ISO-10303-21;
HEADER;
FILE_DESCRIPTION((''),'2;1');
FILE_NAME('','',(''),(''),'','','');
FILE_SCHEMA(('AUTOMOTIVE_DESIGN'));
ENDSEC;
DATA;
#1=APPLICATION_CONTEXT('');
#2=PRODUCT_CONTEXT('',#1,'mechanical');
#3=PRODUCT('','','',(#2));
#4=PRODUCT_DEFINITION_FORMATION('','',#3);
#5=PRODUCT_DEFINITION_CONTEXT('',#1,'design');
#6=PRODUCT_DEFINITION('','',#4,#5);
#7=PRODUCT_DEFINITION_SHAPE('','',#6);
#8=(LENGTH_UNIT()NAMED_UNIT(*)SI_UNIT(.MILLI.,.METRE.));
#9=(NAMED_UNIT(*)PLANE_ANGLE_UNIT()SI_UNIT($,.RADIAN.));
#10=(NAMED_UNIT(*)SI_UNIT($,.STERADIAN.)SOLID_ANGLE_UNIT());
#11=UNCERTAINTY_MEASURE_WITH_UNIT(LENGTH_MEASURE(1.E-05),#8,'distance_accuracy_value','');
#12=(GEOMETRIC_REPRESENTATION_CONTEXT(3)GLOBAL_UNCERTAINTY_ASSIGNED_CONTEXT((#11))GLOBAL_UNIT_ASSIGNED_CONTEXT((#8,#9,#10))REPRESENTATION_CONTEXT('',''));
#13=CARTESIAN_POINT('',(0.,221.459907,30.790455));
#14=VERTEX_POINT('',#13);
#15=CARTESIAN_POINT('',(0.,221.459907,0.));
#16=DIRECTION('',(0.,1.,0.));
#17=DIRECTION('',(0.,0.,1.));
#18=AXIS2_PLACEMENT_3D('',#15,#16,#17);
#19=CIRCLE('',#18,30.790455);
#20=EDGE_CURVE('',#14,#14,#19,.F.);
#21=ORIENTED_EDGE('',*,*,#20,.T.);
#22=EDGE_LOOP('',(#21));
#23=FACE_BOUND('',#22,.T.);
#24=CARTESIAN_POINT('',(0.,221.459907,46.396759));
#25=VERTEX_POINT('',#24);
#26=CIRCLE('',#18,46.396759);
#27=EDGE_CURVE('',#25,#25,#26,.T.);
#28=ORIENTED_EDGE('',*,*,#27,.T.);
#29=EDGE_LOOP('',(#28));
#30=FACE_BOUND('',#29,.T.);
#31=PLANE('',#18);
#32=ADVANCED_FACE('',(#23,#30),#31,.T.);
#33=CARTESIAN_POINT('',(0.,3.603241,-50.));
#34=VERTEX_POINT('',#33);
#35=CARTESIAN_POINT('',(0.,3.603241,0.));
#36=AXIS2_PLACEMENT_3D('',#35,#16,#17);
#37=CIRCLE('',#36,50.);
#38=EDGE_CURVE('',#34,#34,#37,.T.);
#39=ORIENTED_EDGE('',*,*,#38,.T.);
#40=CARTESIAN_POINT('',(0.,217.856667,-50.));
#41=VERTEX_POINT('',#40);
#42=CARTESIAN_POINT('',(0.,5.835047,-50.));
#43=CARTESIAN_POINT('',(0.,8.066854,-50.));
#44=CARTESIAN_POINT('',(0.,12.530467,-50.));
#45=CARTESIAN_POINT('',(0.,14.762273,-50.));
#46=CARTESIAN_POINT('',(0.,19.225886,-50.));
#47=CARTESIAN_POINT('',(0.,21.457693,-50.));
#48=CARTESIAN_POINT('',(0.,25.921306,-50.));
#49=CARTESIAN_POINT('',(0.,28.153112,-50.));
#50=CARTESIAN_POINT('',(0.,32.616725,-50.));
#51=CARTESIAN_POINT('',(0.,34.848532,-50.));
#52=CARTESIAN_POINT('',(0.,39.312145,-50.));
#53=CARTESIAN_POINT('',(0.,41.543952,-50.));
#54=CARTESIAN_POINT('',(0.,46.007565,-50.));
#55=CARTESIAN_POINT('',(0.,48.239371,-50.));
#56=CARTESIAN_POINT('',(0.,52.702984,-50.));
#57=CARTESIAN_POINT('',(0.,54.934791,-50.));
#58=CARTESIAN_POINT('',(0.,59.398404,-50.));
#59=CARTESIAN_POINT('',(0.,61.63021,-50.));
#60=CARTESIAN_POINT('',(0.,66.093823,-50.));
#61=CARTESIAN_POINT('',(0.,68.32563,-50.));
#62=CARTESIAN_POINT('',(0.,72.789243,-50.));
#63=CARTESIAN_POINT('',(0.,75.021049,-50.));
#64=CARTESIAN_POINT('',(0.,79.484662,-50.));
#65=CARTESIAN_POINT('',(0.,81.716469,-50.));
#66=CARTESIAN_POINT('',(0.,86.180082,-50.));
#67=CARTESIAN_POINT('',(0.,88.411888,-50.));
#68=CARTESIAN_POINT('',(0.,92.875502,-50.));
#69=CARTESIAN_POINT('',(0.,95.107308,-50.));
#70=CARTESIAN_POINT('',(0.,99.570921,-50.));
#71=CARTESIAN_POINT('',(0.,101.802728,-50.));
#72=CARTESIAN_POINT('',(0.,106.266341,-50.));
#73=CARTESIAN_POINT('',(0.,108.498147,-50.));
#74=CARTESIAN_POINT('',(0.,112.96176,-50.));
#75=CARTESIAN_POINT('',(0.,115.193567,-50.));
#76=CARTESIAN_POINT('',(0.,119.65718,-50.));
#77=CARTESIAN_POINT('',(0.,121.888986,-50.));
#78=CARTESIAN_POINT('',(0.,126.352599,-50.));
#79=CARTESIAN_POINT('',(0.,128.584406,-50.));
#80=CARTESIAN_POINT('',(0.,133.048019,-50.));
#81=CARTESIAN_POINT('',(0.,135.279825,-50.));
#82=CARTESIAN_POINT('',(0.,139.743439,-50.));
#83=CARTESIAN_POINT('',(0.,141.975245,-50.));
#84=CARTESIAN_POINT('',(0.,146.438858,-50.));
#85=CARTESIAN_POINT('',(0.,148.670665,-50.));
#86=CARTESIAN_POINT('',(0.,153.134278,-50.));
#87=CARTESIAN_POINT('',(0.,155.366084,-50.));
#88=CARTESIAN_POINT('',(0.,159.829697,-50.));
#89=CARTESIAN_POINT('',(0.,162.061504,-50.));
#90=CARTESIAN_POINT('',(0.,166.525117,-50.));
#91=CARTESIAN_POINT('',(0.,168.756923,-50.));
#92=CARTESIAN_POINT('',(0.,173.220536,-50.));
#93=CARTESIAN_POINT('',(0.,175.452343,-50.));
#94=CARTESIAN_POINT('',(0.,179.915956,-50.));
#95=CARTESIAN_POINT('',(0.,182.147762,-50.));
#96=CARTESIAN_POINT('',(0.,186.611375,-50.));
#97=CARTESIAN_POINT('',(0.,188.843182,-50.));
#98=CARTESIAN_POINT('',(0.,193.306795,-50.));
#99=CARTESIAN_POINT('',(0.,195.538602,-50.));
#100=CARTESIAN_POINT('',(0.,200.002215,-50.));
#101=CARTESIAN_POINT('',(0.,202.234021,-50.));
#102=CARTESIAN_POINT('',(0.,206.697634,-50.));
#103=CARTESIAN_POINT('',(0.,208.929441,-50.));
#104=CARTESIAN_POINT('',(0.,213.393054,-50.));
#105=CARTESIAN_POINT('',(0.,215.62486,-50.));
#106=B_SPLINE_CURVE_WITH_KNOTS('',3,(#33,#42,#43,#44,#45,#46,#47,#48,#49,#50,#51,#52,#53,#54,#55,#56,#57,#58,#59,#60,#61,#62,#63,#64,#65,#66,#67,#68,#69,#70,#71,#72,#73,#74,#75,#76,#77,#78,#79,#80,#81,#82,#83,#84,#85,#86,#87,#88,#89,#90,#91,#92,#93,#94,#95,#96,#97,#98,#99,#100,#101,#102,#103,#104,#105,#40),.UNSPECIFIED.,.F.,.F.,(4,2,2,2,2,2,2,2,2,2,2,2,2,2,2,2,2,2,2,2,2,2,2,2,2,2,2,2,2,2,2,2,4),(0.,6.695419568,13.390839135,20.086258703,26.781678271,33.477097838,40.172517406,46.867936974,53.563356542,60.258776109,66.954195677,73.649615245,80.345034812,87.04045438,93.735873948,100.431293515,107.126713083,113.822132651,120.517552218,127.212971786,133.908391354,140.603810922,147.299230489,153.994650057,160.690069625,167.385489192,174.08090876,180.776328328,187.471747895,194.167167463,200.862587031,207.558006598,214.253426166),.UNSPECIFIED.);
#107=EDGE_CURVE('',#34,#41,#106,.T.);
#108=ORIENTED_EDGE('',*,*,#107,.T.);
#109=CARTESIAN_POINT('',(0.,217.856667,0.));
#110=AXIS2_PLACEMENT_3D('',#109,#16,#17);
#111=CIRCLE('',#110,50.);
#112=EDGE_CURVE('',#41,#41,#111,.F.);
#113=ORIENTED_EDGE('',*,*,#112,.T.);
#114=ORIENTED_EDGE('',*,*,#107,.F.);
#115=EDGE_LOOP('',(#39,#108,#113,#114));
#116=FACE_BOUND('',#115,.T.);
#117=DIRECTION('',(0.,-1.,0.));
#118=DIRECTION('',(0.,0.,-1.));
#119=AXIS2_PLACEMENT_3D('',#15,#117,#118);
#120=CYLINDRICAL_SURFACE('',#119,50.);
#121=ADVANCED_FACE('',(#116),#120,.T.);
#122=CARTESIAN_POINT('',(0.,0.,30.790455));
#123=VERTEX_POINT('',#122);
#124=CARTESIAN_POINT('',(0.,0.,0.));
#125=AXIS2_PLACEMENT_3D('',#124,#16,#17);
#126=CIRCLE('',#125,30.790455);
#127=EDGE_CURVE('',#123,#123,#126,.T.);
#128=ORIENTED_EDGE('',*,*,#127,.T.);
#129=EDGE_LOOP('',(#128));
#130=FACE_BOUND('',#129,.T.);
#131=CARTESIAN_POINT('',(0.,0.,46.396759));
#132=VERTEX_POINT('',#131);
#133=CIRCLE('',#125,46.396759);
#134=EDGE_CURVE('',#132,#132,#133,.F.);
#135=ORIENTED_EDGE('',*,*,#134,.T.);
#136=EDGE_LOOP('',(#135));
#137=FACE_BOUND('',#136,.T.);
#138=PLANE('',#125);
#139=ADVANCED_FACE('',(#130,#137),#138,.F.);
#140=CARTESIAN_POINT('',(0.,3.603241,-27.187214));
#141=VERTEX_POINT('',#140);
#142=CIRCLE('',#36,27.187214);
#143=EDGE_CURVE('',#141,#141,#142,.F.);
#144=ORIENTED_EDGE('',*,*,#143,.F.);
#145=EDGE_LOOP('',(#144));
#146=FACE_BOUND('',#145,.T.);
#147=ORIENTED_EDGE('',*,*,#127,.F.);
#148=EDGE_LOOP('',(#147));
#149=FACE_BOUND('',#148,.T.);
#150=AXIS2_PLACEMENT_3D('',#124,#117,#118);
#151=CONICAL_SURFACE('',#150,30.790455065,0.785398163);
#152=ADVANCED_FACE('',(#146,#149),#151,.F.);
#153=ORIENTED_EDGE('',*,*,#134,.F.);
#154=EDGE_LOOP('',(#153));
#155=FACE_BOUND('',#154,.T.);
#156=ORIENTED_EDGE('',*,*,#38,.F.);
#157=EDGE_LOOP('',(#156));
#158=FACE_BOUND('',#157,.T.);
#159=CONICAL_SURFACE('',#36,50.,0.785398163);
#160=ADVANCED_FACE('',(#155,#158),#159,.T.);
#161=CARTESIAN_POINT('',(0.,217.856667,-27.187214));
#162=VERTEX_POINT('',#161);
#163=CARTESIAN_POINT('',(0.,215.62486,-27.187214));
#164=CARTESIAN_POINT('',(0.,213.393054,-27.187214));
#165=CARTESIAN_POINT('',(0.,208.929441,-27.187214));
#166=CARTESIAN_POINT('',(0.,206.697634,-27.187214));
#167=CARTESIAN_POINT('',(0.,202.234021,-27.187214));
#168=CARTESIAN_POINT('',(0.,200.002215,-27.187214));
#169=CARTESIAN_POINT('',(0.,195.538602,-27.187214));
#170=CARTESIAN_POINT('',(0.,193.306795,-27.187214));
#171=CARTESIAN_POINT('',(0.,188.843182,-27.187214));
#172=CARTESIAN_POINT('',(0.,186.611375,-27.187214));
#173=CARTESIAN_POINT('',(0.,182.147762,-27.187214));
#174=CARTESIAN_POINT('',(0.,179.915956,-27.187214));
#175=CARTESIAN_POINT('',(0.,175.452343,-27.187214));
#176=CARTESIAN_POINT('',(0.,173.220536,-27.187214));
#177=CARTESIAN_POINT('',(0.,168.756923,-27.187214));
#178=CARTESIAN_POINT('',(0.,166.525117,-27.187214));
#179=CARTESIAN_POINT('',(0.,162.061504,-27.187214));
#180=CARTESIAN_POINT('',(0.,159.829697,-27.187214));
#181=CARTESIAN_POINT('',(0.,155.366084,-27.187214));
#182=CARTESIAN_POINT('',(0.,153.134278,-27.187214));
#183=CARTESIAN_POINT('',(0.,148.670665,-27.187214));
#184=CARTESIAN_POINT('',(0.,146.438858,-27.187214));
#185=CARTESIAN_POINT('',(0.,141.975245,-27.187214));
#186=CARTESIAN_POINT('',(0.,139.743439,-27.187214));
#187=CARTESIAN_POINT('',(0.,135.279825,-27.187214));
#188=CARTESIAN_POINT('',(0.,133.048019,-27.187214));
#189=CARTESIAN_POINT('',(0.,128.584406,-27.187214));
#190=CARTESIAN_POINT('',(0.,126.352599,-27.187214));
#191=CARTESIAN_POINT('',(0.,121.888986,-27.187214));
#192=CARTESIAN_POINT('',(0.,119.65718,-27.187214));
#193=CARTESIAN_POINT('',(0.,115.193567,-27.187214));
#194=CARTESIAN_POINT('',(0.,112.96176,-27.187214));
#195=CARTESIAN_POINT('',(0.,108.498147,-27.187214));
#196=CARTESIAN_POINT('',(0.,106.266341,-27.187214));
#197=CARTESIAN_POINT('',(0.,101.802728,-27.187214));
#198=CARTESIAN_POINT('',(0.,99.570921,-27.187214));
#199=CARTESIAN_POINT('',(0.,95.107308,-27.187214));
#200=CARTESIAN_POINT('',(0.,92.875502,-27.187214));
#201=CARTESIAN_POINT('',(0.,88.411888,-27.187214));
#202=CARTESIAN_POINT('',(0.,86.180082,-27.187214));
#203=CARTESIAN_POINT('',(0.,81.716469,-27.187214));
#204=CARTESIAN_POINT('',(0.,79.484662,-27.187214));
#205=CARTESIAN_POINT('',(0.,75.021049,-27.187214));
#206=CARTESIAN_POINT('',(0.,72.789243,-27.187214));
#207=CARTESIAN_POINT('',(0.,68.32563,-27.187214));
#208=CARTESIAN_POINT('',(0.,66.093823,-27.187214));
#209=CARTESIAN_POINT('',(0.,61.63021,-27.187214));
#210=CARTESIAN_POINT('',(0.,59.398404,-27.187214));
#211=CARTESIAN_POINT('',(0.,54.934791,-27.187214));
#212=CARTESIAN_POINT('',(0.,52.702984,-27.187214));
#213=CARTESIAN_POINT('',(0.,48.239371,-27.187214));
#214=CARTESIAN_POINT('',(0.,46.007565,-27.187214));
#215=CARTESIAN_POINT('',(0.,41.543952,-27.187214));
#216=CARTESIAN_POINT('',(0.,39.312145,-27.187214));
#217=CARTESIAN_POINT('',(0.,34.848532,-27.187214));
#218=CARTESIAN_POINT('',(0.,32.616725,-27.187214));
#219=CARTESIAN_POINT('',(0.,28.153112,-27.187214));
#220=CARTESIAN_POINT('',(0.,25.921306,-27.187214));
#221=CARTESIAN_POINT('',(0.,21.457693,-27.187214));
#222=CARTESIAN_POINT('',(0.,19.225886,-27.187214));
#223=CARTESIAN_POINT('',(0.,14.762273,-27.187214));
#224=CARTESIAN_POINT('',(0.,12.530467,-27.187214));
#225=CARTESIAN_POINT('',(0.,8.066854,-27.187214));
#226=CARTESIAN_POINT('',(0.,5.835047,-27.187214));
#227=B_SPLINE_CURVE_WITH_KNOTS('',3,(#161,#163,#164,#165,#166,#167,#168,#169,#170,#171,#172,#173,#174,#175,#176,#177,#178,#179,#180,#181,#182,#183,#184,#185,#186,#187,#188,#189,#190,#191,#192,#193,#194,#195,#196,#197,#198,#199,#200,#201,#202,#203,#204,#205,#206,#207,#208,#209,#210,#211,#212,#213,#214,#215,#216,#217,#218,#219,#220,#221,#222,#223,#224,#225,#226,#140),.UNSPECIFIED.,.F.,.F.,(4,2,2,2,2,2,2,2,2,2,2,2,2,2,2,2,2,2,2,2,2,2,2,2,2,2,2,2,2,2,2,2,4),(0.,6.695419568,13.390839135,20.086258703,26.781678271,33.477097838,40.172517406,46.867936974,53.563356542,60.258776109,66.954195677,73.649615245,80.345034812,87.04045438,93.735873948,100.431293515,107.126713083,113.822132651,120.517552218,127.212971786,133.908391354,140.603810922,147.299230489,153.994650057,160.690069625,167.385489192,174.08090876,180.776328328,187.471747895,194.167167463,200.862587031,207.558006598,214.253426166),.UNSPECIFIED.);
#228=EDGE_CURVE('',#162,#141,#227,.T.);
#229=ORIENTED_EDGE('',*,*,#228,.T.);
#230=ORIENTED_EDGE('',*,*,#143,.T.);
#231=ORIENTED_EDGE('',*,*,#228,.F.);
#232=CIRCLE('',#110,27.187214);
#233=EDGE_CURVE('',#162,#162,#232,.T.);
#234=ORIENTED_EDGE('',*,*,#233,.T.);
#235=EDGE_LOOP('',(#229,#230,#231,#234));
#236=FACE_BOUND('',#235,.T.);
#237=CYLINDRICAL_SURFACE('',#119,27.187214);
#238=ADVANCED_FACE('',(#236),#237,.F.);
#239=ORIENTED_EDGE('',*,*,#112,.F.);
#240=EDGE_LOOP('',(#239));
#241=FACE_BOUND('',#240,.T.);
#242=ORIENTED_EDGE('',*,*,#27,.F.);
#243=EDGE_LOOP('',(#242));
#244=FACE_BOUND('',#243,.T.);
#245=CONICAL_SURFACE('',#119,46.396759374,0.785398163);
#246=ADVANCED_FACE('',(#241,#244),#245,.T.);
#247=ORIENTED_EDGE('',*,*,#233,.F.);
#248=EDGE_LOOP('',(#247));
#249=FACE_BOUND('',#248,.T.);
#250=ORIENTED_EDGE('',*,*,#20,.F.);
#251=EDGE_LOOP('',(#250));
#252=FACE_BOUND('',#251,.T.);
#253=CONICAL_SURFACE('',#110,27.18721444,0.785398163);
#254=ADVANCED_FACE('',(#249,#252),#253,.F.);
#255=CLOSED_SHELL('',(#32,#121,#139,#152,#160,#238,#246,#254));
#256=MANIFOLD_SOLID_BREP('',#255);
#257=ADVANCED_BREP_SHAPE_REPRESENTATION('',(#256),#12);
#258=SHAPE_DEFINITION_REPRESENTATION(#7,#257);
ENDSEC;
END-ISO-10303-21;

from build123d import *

# Parameters (mm, degrees)
SKETCH1_R           = 50
BOSS_EXTRUDE1_DEPTH = 221.459907417
SKETCH2_R           = 27.18721444
CUT_EXTRUDE1_DEPTH  = 233.474709578
CHAMFER1_SIZE       = 3.603240626


with BuildPart() as part:
    # Sketch1 → Boss-Extrude1 (new body)
    with BuildSketch(Plane(origin=(0, 0, 0), x_dir=(1, 0, 0), z_dir=(0, 1, 0))):
        Circle(SKETCH1_R)
    extrude(amount=BOSS_EXTRUDE1_DEPTH)

    # Sketch2 → Cut-Extrude1 (cut, through all)
    with BuildSketch(Plane(origin=(0, 0, 0), x_dir=(1, 0, 0), z_dir=(0, 1, 0))):
        Circle(SKETCH2_R)
    extrude(amount=CUT_EXTRUDE1_DEPTH, mode=Mode.SUBTRACT)

    # Chamfer1
    chamfer1_edges = [part.edges().sort_by_distance(p)[0] for p in [
        (-27.18721444, 221.459907417, 0),
        (-27.18721444, 0, 0),
        (-50, 0, 0),
        (-50, 221.459907417, 0),
    ]]
    chamfer(chamfer1_edges, length=CHAMFER1_SIZE)


solid = part.part
